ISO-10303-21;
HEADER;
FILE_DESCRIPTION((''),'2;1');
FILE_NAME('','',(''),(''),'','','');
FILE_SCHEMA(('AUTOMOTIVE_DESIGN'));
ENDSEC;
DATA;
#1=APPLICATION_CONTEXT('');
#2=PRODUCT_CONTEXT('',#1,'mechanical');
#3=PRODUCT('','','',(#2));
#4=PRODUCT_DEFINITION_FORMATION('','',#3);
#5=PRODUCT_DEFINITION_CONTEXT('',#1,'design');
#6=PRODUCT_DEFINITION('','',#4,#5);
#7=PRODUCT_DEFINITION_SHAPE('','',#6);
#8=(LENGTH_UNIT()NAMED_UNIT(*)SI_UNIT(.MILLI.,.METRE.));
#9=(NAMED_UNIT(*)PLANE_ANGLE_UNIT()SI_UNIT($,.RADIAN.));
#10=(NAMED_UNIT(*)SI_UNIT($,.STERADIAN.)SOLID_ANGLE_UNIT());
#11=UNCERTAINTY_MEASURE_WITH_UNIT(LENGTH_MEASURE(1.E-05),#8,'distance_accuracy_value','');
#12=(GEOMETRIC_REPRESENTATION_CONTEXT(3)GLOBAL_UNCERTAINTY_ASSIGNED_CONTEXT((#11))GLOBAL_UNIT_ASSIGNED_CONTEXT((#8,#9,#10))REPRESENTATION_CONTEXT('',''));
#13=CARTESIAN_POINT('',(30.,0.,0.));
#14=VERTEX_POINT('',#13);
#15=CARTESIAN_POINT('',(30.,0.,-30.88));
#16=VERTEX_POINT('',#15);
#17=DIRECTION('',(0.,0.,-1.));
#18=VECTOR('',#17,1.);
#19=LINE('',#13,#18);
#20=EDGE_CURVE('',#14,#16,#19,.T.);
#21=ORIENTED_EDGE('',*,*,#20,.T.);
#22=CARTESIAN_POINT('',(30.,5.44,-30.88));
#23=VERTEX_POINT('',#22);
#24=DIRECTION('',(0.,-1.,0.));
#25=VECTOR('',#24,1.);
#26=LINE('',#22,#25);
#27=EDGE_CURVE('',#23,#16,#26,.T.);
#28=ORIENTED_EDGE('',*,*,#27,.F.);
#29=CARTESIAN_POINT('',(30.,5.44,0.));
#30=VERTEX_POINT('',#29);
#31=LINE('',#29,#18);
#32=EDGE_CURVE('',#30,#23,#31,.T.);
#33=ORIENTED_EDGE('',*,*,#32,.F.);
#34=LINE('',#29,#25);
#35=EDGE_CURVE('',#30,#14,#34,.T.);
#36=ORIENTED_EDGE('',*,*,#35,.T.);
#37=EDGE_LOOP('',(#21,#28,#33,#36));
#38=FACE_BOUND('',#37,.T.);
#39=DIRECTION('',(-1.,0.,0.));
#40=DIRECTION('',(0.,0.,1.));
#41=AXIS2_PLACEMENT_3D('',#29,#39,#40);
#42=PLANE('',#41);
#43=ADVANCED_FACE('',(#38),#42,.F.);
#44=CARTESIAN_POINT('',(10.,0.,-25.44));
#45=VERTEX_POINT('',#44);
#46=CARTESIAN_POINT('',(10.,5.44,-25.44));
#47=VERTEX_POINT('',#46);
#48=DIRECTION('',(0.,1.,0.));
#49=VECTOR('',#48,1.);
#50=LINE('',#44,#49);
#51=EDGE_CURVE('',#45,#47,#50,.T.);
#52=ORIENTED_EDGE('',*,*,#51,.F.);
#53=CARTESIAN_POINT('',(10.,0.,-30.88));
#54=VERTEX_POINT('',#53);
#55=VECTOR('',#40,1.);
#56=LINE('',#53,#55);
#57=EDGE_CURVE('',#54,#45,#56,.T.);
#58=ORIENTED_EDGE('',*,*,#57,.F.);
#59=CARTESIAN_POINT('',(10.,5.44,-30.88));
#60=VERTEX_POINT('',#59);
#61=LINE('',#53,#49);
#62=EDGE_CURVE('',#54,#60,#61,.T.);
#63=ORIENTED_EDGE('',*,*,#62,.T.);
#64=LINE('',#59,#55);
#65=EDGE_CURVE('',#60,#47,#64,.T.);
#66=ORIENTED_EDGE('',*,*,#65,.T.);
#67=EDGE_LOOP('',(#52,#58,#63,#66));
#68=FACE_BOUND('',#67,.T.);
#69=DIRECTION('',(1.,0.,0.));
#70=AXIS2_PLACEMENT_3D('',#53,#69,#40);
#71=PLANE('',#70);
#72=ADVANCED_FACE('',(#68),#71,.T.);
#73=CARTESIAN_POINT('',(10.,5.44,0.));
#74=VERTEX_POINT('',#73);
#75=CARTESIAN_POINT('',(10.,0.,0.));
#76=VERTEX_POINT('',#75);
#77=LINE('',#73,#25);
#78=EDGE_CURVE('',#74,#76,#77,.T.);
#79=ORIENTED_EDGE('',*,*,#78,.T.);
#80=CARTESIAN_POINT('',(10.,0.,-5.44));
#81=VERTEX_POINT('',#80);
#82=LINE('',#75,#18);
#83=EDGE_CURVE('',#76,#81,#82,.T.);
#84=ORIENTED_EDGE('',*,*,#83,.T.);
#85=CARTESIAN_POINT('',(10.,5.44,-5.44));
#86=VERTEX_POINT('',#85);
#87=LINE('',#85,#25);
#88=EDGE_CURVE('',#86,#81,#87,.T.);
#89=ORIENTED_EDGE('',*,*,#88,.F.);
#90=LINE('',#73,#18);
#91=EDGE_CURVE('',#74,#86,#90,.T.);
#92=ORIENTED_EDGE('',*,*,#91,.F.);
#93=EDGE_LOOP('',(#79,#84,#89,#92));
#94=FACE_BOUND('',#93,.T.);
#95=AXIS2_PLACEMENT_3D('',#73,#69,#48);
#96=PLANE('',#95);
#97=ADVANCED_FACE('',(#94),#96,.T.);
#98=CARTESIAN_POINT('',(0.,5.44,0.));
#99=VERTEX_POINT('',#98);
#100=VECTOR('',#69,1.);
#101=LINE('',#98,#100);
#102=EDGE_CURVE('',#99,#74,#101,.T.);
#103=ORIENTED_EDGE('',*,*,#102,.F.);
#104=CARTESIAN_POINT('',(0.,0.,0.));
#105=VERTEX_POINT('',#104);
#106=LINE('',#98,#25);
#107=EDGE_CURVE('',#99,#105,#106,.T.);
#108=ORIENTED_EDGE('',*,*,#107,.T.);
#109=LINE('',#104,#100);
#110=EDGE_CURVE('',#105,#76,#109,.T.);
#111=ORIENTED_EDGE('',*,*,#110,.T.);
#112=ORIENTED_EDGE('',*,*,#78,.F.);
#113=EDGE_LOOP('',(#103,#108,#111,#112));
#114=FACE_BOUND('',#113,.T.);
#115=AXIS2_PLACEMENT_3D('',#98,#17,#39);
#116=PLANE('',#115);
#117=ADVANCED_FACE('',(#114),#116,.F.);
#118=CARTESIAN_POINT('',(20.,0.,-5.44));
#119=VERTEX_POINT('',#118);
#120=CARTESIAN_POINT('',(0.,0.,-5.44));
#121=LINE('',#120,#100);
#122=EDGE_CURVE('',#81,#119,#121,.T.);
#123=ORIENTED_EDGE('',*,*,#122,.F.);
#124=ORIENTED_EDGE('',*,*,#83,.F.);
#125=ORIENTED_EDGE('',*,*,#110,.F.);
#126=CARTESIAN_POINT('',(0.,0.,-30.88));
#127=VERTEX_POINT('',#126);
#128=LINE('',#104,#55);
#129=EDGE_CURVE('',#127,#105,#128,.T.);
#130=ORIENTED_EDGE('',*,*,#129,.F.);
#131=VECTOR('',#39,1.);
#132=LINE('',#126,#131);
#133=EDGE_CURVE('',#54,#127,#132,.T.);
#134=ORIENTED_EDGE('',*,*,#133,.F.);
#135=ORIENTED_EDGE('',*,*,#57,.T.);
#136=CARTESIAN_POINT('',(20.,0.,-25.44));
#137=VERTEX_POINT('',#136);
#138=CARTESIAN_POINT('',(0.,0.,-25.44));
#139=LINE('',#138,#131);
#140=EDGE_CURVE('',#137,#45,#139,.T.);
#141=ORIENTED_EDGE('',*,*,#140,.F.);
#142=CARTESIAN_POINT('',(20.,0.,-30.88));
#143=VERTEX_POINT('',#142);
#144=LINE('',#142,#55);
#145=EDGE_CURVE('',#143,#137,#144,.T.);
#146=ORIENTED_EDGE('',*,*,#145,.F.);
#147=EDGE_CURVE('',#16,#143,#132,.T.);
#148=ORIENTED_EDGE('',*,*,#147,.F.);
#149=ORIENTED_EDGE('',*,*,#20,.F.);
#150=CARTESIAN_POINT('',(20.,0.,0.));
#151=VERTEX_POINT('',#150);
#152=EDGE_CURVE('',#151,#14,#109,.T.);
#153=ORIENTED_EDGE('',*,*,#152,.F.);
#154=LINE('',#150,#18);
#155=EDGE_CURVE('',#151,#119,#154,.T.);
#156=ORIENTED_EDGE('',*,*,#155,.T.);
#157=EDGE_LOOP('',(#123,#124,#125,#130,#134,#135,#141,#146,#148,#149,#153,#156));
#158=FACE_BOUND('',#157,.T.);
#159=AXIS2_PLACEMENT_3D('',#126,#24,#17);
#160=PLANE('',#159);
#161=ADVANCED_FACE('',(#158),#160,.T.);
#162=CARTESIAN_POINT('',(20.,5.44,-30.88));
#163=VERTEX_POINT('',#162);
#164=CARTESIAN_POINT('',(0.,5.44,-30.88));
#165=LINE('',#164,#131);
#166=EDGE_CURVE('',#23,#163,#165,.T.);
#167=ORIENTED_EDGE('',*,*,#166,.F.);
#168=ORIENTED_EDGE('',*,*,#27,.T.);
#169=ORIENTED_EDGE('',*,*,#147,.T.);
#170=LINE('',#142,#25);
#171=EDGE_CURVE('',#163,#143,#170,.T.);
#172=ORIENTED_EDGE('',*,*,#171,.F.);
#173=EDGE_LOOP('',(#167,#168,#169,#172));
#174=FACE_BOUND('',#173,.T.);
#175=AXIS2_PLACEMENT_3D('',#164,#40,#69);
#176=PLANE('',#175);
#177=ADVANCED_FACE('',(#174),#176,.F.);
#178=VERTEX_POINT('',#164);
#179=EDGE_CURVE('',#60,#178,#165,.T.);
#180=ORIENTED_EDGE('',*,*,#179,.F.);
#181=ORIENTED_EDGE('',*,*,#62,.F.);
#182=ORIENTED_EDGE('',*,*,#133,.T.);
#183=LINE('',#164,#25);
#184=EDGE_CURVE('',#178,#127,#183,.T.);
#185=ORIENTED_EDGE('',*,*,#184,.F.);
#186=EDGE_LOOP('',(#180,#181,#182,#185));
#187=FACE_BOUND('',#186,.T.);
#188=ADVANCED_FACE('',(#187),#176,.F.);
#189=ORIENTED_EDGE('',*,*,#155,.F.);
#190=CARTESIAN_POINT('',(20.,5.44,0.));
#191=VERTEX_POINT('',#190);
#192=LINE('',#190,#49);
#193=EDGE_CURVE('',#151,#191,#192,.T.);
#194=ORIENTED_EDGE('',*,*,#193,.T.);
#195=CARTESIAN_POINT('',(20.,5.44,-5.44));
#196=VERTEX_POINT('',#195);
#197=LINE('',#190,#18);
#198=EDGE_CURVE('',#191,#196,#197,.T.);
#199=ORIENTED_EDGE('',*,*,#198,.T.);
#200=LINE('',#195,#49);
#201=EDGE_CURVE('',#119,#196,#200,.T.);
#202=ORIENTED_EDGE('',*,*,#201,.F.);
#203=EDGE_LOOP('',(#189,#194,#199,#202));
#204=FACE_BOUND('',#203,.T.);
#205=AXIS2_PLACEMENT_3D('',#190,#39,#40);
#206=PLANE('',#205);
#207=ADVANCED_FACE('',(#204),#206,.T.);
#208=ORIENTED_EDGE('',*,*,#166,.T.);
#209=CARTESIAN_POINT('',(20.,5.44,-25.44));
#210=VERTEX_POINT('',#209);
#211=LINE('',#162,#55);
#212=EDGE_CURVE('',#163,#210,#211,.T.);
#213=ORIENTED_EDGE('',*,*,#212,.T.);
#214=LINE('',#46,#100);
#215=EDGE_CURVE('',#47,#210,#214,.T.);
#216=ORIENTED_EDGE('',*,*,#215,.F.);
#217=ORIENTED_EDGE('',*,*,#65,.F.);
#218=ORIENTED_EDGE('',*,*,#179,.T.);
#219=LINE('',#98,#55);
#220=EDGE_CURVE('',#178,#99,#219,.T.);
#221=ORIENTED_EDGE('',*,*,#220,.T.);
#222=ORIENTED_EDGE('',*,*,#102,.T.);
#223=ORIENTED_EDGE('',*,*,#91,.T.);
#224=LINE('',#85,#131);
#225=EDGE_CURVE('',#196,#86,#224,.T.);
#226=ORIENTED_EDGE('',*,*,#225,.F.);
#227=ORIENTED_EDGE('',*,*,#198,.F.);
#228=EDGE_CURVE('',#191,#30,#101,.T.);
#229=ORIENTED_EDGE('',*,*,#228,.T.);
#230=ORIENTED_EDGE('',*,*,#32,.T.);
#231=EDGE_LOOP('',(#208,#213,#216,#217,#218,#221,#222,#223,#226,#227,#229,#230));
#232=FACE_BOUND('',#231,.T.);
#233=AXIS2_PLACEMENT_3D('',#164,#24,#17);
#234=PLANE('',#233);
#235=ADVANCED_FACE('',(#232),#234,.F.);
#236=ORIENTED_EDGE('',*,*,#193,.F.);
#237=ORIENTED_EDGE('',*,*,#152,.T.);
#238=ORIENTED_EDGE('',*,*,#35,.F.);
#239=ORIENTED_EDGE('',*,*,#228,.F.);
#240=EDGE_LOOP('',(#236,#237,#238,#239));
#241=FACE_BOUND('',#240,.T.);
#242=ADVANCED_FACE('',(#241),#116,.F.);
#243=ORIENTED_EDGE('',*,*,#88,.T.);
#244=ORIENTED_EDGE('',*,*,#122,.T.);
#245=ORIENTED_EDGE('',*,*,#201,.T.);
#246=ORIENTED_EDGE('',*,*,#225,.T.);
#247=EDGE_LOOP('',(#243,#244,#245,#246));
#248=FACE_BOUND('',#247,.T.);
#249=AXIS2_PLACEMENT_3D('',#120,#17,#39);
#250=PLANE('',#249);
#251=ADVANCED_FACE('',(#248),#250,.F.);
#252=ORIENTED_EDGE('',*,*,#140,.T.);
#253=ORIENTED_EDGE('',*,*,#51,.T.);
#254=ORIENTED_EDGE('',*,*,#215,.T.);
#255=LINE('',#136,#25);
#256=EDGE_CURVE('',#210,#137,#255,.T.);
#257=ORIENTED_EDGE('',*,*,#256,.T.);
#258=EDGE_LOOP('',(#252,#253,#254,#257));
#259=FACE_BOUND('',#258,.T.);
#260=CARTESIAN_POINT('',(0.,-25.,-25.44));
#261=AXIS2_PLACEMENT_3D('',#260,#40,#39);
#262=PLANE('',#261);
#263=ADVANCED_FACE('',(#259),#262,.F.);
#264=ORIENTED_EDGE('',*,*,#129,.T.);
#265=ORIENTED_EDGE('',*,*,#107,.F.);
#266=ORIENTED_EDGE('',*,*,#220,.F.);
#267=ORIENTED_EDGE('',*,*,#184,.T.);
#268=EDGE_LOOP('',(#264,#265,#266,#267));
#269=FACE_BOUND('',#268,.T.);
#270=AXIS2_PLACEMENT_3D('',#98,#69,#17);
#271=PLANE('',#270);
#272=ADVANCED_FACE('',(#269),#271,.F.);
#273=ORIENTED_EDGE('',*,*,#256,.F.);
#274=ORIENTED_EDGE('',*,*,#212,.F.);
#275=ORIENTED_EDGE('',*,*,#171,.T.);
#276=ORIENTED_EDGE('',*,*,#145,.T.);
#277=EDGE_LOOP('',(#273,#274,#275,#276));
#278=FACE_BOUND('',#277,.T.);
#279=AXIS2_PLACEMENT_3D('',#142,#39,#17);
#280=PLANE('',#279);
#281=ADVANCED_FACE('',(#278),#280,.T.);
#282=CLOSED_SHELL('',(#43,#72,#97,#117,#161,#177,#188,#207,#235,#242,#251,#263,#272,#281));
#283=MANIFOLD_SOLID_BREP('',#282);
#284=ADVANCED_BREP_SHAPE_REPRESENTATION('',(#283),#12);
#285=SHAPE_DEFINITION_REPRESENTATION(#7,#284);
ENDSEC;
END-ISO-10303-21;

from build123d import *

# Parameters (mm, degrees)
SKETCH1_W           = 30
SKETCH1_H           = 30.88
BOSS_EXTRUDE1_DEPTH = 5.44
CAVITY1_START       = 10
CAVITY1_OUTLINE_W   = 5.44
CAVITY1_OUTLINE_H   = 5.44
CAVITY1_DEPTH       = 10


# Read off the part's stored shape, not the designer's step: Cavity1
with BuildPart() as part:
    # Sketch1 → Boss-Extrude1 (new body)
    with BuildSketch(Plane(origin=(0, 0, 0), x_dir=(1, 0, 0), z_dir=(0, 1, 0))):
        with Locations((15, 15.44)):
            Rectangle(SKETCH1_W, SKETCH1_H)
    extrude(amount=BOSS_EXTRUDE1_DEPTH)

    # Cavity1 outline → Cavity1 (cut)
    with BuildSketch(Plane.YZ.offset(CAVITY1_START)):
        with Locations((2.72, -28.16)):
            Rectangle(CAVITY1_OUTLINE_W, CAVITY1_OUTLINE_H)
        with Locations((2.72, -2.72)):
            Rectangle(CAVITY1_OUTLINE_W, CAVITY1_OUTLINE_H)
    extrude(amount=CAVITY1_DEPTH, mode=Mode.SUBTRACT)


solid = part.part
